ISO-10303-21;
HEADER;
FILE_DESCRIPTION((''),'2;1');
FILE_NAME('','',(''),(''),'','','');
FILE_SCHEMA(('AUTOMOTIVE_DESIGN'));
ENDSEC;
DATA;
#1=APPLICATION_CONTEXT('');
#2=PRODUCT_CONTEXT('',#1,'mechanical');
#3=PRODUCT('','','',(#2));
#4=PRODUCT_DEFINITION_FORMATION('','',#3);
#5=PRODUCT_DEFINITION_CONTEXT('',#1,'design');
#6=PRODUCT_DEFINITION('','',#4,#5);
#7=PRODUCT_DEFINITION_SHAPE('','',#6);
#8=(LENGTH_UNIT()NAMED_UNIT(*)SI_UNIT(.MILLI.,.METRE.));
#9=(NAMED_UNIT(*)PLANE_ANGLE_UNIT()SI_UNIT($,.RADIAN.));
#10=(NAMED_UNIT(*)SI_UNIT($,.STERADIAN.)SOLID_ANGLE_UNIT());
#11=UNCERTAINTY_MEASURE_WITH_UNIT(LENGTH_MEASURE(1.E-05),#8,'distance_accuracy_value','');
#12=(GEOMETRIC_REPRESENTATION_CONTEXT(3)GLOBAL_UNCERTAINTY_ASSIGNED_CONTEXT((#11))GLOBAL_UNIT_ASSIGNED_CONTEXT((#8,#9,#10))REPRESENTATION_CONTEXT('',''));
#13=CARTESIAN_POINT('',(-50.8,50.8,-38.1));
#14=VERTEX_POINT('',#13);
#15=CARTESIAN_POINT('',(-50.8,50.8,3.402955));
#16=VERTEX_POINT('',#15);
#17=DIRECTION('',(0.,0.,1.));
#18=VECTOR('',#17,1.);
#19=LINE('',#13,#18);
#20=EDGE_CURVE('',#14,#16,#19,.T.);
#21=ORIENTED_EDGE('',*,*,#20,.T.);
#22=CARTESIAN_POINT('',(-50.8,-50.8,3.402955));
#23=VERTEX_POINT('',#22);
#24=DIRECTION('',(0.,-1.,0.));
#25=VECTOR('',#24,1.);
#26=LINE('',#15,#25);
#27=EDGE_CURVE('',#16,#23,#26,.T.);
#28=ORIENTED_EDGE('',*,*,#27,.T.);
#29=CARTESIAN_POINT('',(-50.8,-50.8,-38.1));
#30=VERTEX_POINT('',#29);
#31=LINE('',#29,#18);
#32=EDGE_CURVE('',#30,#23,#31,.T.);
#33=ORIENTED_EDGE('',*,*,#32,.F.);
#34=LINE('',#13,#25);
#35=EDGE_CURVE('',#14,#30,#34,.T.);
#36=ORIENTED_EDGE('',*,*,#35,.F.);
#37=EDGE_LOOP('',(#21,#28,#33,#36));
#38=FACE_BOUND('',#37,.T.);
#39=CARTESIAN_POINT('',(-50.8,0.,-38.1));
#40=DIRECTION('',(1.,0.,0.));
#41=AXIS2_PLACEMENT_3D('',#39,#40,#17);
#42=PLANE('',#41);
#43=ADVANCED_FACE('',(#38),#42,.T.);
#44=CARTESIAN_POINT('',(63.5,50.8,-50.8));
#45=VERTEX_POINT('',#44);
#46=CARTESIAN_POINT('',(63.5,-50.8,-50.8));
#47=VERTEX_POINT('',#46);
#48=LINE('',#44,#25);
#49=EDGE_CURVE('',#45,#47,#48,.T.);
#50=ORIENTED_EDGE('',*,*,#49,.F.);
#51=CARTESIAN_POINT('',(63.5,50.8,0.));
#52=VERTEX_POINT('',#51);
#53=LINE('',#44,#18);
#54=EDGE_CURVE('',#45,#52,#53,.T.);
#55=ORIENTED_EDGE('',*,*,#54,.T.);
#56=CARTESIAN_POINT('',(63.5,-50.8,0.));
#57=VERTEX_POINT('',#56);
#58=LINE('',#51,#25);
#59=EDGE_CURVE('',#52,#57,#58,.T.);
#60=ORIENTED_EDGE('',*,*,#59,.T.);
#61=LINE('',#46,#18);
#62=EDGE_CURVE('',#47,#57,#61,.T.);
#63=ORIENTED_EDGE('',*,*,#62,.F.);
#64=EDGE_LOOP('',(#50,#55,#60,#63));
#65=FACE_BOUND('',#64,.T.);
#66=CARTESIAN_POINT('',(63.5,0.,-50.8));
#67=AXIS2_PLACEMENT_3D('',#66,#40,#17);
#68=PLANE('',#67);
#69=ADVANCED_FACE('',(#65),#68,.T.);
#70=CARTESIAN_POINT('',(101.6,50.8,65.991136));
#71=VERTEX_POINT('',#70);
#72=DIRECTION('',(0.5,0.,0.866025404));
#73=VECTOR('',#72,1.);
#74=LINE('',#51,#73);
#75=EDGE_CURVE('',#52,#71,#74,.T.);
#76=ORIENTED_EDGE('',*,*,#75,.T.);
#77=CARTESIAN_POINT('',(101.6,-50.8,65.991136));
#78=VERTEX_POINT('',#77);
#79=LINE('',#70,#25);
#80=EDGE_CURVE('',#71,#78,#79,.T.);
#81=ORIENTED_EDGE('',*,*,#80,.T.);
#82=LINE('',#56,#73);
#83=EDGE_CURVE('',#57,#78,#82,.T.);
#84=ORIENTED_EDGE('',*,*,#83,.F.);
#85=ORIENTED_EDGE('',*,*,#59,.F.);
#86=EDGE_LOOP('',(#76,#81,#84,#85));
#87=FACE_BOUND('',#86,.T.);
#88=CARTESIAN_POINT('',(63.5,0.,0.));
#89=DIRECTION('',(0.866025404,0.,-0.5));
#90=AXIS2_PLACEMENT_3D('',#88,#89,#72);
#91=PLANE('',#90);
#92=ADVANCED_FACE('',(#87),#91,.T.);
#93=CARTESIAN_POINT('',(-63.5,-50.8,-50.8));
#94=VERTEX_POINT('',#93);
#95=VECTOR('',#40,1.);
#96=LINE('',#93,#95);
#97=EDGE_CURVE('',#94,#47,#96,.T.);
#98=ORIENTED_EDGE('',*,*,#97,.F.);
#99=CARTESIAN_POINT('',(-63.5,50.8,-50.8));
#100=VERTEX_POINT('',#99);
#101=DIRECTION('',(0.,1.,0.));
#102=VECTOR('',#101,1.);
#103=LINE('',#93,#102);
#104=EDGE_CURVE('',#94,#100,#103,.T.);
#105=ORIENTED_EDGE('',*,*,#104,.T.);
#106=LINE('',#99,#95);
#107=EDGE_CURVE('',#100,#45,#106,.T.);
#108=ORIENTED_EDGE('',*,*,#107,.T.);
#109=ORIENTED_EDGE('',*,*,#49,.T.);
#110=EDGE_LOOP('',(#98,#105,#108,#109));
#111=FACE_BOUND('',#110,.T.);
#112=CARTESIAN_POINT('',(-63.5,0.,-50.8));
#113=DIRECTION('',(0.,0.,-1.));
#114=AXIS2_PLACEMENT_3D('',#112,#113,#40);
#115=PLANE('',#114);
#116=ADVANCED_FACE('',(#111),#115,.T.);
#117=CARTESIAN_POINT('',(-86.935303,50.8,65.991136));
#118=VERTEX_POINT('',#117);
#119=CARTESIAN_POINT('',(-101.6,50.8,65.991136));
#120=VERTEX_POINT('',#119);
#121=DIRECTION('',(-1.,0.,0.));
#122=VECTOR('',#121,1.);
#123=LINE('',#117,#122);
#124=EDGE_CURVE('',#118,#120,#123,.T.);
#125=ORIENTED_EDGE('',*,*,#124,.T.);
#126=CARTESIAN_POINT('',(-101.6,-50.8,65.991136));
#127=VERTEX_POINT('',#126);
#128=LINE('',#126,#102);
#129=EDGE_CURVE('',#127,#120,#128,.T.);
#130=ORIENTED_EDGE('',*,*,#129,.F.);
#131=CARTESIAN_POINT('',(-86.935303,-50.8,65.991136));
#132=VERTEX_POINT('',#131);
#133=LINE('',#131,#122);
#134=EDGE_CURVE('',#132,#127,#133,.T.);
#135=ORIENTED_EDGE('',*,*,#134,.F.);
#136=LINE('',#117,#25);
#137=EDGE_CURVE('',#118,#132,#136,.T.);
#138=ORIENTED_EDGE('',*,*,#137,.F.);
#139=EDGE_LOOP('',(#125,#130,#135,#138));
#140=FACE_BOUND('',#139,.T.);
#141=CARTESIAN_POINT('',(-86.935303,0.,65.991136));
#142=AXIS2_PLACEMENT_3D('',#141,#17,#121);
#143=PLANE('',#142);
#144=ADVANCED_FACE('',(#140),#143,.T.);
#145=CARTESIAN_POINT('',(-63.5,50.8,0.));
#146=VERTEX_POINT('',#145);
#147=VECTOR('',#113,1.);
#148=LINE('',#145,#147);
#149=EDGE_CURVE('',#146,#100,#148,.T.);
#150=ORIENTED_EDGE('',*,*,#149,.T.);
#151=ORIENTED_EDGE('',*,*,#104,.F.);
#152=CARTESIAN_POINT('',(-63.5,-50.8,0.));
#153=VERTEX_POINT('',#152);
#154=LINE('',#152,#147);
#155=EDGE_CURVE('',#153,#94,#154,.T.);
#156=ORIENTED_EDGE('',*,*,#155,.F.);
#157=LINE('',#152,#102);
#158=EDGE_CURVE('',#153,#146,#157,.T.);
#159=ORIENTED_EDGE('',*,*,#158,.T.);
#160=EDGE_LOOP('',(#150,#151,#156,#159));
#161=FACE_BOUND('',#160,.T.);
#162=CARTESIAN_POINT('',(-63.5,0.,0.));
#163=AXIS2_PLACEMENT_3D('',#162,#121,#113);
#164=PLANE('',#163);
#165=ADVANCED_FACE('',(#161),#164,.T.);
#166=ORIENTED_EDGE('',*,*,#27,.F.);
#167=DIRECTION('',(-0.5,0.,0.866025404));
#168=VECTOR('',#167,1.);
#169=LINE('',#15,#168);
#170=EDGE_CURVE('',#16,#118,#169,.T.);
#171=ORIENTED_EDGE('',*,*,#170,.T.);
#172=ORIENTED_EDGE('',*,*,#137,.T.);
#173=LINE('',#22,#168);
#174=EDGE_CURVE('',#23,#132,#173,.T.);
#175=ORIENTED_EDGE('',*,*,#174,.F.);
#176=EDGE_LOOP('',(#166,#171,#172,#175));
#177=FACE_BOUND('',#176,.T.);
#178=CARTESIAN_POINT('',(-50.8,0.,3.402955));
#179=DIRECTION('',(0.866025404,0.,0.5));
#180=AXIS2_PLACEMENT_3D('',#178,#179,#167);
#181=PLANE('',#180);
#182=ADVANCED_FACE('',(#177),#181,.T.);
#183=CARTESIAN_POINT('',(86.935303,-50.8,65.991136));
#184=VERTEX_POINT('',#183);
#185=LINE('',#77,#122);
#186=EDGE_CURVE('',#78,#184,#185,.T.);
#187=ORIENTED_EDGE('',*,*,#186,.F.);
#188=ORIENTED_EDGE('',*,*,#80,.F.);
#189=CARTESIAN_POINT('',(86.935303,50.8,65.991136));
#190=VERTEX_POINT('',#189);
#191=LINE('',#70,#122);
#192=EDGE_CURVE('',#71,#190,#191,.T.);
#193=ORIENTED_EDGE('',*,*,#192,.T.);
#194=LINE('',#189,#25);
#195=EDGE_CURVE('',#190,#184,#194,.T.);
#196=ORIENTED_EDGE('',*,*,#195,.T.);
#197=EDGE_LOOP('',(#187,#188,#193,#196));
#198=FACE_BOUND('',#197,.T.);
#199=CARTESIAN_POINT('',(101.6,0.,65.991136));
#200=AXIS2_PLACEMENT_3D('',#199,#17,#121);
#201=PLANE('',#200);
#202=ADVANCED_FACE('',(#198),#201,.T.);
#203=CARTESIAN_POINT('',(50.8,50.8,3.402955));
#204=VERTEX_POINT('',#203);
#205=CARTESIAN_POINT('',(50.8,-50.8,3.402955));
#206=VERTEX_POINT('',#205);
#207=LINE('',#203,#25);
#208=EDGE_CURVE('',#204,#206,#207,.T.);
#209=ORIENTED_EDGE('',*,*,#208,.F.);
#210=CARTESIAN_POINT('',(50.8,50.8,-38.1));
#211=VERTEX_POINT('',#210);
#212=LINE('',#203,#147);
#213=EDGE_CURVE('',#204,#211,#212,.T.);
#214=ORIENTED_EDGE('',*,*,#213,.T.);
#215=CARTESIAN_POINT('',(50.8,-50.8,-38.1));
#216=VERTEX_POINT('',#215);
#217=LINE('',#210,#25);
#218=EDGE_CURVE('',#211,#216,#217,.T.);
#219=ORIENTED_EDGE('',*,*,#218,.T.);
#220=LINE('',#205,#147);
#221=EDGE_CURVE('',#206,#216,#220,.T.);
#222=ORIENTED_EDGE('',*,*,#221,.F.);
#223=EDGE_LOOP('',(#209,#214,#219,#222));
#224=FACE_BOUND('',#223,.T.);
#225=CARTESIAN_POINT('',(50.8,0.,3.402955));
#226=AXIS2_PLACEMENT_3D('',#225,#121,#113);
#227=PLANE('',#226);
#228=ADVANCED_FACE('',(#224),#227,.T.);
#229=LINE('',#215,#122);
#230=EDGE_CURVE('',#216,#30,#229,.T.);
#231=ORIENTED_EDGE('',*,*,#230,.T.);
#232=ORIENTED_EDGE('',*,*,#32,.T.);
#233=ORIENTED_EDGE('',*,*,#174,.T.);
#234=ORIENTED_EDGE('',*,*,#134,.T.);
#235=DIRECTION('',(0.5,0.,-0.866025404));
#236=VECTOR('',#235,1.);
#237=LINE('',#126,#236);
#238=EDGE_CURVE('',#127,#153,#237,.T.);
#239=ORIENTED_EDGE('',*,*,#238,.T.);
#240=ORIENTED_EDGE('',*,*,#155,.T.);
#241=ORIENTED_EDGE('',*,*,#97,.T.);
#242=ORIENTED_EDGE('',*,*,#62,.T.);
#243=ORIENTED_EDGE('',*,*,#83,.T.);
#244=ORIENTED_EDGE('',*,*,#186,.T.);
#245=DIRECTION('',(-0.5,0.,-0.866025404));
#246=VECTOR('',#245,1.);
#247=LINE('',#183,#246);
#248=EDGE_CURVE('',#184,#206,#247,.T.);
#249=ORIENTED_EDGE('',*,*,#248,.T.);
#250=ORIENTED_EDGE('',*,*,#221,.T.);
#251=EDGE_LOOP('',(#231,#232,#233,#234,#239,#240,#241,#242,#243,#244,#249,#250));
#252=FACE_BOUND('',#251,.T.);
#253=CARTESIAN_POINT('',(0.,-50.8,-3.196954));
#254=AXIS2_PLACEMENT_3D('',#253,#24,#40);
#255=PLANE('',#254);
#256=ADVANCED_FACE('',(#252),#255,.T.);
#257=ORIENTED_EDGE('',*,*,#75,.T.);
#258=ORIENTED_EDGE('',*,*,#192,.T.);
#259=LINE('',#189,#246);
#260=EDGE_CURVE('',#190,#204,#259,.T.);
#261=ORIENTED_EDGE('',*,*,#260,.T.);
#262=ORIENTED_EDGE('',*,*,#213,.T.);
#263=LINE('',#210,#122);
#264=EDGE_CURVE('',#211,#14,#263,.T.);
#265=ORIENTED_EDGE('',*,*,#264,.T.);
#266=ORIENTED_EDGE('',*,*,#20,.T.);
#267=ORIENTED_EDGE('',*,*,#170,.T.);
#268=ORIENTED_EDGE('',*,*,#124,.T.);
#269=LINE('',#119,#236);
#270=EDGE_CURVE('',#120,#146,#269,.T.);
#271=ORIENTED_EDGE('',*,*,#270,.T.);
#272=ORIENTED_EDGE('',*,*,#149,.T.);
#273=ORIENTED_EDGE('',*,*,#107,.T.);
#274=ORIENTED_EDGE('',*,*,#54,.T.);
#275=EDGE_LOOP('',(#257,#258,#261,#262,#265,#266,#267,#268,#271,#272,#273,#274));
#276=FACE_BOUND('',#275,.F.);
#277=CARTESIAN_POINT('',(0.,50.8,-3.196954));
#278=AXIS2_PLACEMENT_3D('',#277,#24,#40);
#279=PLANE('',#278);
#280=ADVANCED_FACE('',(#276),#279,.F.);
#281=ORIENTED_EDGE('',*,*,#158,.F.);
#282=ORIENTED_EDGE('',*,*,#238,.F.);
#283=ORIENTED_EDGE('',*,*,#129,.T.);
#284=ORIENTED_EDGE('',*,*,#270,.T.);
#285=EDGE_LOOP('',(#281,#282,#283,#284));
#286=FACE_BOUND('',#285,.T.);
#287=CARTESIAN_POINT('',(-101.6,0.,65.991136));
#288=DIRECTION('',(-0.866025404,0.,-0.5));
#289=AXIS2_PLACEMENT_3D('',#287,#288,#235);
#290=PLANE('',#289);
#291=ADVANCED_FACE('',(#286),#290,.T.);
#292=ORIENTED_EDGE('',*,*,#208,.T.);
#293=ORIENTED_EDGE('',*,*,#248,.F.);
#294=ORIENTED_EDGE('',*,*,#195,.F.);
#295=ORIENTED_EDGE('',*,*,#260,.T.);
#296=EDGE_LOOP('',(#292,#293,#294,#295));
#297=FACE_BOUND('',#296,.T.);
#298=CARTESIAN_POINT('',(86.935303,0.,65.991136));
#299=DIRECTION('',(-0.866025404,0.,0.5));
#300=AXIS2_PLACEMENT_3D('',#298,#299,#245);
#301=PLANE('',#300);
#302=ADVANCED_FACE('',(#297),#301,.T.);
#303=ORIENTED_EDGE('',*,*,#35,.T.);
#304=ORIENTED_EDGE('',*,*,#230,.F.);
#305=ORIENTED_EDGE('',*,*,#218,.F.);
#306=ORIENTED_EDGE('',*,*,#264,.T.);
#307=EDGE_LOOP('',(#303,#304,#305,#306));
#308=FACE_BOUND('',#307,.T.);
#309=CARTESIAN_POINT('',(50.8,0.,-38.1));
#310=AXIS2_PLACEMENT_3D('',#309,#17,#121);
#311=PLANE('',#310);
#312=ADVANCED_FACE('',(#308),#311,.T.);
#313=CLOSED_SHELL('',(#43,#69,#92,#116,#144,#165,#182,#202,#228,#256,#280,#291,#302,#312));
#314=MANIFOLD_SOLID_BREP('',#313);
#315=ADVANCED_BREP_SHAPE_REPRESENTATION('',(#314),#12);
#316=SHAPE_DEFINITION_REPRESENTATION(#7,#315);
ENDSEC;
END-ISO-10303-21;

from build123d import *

# Parameters (mm, degrees)
F1_DEPTH = 50.8


# Not quite as in the source:
# - the program builds the solid bodies; features that only make, move or delete a surface that nothing else refers to are left out


with BuildPart() as f1:
    # F0 (on Front) → F1 (new body, symmetric)
    with BuildSketch(Plane.XZ):
        Polygon((-63.5, -50.8), (0, -50.8), (63.5, -50.8), (63.5, 0), (101.6, 65.9911357684), (86.9353031626, 65.9911357684), (50.8, 3.4029547439), (50.8, -38.1), (0, -38.1), (-50.8, -38.1), (-50.8, 3.4029547439), (-86.9353031626, 65.9911357684), (-101.6, 65.9911357684), (-63.5, 0), align=None)
    extrude(amount=F1_DEPTH, both=True)


solid = f1.part
